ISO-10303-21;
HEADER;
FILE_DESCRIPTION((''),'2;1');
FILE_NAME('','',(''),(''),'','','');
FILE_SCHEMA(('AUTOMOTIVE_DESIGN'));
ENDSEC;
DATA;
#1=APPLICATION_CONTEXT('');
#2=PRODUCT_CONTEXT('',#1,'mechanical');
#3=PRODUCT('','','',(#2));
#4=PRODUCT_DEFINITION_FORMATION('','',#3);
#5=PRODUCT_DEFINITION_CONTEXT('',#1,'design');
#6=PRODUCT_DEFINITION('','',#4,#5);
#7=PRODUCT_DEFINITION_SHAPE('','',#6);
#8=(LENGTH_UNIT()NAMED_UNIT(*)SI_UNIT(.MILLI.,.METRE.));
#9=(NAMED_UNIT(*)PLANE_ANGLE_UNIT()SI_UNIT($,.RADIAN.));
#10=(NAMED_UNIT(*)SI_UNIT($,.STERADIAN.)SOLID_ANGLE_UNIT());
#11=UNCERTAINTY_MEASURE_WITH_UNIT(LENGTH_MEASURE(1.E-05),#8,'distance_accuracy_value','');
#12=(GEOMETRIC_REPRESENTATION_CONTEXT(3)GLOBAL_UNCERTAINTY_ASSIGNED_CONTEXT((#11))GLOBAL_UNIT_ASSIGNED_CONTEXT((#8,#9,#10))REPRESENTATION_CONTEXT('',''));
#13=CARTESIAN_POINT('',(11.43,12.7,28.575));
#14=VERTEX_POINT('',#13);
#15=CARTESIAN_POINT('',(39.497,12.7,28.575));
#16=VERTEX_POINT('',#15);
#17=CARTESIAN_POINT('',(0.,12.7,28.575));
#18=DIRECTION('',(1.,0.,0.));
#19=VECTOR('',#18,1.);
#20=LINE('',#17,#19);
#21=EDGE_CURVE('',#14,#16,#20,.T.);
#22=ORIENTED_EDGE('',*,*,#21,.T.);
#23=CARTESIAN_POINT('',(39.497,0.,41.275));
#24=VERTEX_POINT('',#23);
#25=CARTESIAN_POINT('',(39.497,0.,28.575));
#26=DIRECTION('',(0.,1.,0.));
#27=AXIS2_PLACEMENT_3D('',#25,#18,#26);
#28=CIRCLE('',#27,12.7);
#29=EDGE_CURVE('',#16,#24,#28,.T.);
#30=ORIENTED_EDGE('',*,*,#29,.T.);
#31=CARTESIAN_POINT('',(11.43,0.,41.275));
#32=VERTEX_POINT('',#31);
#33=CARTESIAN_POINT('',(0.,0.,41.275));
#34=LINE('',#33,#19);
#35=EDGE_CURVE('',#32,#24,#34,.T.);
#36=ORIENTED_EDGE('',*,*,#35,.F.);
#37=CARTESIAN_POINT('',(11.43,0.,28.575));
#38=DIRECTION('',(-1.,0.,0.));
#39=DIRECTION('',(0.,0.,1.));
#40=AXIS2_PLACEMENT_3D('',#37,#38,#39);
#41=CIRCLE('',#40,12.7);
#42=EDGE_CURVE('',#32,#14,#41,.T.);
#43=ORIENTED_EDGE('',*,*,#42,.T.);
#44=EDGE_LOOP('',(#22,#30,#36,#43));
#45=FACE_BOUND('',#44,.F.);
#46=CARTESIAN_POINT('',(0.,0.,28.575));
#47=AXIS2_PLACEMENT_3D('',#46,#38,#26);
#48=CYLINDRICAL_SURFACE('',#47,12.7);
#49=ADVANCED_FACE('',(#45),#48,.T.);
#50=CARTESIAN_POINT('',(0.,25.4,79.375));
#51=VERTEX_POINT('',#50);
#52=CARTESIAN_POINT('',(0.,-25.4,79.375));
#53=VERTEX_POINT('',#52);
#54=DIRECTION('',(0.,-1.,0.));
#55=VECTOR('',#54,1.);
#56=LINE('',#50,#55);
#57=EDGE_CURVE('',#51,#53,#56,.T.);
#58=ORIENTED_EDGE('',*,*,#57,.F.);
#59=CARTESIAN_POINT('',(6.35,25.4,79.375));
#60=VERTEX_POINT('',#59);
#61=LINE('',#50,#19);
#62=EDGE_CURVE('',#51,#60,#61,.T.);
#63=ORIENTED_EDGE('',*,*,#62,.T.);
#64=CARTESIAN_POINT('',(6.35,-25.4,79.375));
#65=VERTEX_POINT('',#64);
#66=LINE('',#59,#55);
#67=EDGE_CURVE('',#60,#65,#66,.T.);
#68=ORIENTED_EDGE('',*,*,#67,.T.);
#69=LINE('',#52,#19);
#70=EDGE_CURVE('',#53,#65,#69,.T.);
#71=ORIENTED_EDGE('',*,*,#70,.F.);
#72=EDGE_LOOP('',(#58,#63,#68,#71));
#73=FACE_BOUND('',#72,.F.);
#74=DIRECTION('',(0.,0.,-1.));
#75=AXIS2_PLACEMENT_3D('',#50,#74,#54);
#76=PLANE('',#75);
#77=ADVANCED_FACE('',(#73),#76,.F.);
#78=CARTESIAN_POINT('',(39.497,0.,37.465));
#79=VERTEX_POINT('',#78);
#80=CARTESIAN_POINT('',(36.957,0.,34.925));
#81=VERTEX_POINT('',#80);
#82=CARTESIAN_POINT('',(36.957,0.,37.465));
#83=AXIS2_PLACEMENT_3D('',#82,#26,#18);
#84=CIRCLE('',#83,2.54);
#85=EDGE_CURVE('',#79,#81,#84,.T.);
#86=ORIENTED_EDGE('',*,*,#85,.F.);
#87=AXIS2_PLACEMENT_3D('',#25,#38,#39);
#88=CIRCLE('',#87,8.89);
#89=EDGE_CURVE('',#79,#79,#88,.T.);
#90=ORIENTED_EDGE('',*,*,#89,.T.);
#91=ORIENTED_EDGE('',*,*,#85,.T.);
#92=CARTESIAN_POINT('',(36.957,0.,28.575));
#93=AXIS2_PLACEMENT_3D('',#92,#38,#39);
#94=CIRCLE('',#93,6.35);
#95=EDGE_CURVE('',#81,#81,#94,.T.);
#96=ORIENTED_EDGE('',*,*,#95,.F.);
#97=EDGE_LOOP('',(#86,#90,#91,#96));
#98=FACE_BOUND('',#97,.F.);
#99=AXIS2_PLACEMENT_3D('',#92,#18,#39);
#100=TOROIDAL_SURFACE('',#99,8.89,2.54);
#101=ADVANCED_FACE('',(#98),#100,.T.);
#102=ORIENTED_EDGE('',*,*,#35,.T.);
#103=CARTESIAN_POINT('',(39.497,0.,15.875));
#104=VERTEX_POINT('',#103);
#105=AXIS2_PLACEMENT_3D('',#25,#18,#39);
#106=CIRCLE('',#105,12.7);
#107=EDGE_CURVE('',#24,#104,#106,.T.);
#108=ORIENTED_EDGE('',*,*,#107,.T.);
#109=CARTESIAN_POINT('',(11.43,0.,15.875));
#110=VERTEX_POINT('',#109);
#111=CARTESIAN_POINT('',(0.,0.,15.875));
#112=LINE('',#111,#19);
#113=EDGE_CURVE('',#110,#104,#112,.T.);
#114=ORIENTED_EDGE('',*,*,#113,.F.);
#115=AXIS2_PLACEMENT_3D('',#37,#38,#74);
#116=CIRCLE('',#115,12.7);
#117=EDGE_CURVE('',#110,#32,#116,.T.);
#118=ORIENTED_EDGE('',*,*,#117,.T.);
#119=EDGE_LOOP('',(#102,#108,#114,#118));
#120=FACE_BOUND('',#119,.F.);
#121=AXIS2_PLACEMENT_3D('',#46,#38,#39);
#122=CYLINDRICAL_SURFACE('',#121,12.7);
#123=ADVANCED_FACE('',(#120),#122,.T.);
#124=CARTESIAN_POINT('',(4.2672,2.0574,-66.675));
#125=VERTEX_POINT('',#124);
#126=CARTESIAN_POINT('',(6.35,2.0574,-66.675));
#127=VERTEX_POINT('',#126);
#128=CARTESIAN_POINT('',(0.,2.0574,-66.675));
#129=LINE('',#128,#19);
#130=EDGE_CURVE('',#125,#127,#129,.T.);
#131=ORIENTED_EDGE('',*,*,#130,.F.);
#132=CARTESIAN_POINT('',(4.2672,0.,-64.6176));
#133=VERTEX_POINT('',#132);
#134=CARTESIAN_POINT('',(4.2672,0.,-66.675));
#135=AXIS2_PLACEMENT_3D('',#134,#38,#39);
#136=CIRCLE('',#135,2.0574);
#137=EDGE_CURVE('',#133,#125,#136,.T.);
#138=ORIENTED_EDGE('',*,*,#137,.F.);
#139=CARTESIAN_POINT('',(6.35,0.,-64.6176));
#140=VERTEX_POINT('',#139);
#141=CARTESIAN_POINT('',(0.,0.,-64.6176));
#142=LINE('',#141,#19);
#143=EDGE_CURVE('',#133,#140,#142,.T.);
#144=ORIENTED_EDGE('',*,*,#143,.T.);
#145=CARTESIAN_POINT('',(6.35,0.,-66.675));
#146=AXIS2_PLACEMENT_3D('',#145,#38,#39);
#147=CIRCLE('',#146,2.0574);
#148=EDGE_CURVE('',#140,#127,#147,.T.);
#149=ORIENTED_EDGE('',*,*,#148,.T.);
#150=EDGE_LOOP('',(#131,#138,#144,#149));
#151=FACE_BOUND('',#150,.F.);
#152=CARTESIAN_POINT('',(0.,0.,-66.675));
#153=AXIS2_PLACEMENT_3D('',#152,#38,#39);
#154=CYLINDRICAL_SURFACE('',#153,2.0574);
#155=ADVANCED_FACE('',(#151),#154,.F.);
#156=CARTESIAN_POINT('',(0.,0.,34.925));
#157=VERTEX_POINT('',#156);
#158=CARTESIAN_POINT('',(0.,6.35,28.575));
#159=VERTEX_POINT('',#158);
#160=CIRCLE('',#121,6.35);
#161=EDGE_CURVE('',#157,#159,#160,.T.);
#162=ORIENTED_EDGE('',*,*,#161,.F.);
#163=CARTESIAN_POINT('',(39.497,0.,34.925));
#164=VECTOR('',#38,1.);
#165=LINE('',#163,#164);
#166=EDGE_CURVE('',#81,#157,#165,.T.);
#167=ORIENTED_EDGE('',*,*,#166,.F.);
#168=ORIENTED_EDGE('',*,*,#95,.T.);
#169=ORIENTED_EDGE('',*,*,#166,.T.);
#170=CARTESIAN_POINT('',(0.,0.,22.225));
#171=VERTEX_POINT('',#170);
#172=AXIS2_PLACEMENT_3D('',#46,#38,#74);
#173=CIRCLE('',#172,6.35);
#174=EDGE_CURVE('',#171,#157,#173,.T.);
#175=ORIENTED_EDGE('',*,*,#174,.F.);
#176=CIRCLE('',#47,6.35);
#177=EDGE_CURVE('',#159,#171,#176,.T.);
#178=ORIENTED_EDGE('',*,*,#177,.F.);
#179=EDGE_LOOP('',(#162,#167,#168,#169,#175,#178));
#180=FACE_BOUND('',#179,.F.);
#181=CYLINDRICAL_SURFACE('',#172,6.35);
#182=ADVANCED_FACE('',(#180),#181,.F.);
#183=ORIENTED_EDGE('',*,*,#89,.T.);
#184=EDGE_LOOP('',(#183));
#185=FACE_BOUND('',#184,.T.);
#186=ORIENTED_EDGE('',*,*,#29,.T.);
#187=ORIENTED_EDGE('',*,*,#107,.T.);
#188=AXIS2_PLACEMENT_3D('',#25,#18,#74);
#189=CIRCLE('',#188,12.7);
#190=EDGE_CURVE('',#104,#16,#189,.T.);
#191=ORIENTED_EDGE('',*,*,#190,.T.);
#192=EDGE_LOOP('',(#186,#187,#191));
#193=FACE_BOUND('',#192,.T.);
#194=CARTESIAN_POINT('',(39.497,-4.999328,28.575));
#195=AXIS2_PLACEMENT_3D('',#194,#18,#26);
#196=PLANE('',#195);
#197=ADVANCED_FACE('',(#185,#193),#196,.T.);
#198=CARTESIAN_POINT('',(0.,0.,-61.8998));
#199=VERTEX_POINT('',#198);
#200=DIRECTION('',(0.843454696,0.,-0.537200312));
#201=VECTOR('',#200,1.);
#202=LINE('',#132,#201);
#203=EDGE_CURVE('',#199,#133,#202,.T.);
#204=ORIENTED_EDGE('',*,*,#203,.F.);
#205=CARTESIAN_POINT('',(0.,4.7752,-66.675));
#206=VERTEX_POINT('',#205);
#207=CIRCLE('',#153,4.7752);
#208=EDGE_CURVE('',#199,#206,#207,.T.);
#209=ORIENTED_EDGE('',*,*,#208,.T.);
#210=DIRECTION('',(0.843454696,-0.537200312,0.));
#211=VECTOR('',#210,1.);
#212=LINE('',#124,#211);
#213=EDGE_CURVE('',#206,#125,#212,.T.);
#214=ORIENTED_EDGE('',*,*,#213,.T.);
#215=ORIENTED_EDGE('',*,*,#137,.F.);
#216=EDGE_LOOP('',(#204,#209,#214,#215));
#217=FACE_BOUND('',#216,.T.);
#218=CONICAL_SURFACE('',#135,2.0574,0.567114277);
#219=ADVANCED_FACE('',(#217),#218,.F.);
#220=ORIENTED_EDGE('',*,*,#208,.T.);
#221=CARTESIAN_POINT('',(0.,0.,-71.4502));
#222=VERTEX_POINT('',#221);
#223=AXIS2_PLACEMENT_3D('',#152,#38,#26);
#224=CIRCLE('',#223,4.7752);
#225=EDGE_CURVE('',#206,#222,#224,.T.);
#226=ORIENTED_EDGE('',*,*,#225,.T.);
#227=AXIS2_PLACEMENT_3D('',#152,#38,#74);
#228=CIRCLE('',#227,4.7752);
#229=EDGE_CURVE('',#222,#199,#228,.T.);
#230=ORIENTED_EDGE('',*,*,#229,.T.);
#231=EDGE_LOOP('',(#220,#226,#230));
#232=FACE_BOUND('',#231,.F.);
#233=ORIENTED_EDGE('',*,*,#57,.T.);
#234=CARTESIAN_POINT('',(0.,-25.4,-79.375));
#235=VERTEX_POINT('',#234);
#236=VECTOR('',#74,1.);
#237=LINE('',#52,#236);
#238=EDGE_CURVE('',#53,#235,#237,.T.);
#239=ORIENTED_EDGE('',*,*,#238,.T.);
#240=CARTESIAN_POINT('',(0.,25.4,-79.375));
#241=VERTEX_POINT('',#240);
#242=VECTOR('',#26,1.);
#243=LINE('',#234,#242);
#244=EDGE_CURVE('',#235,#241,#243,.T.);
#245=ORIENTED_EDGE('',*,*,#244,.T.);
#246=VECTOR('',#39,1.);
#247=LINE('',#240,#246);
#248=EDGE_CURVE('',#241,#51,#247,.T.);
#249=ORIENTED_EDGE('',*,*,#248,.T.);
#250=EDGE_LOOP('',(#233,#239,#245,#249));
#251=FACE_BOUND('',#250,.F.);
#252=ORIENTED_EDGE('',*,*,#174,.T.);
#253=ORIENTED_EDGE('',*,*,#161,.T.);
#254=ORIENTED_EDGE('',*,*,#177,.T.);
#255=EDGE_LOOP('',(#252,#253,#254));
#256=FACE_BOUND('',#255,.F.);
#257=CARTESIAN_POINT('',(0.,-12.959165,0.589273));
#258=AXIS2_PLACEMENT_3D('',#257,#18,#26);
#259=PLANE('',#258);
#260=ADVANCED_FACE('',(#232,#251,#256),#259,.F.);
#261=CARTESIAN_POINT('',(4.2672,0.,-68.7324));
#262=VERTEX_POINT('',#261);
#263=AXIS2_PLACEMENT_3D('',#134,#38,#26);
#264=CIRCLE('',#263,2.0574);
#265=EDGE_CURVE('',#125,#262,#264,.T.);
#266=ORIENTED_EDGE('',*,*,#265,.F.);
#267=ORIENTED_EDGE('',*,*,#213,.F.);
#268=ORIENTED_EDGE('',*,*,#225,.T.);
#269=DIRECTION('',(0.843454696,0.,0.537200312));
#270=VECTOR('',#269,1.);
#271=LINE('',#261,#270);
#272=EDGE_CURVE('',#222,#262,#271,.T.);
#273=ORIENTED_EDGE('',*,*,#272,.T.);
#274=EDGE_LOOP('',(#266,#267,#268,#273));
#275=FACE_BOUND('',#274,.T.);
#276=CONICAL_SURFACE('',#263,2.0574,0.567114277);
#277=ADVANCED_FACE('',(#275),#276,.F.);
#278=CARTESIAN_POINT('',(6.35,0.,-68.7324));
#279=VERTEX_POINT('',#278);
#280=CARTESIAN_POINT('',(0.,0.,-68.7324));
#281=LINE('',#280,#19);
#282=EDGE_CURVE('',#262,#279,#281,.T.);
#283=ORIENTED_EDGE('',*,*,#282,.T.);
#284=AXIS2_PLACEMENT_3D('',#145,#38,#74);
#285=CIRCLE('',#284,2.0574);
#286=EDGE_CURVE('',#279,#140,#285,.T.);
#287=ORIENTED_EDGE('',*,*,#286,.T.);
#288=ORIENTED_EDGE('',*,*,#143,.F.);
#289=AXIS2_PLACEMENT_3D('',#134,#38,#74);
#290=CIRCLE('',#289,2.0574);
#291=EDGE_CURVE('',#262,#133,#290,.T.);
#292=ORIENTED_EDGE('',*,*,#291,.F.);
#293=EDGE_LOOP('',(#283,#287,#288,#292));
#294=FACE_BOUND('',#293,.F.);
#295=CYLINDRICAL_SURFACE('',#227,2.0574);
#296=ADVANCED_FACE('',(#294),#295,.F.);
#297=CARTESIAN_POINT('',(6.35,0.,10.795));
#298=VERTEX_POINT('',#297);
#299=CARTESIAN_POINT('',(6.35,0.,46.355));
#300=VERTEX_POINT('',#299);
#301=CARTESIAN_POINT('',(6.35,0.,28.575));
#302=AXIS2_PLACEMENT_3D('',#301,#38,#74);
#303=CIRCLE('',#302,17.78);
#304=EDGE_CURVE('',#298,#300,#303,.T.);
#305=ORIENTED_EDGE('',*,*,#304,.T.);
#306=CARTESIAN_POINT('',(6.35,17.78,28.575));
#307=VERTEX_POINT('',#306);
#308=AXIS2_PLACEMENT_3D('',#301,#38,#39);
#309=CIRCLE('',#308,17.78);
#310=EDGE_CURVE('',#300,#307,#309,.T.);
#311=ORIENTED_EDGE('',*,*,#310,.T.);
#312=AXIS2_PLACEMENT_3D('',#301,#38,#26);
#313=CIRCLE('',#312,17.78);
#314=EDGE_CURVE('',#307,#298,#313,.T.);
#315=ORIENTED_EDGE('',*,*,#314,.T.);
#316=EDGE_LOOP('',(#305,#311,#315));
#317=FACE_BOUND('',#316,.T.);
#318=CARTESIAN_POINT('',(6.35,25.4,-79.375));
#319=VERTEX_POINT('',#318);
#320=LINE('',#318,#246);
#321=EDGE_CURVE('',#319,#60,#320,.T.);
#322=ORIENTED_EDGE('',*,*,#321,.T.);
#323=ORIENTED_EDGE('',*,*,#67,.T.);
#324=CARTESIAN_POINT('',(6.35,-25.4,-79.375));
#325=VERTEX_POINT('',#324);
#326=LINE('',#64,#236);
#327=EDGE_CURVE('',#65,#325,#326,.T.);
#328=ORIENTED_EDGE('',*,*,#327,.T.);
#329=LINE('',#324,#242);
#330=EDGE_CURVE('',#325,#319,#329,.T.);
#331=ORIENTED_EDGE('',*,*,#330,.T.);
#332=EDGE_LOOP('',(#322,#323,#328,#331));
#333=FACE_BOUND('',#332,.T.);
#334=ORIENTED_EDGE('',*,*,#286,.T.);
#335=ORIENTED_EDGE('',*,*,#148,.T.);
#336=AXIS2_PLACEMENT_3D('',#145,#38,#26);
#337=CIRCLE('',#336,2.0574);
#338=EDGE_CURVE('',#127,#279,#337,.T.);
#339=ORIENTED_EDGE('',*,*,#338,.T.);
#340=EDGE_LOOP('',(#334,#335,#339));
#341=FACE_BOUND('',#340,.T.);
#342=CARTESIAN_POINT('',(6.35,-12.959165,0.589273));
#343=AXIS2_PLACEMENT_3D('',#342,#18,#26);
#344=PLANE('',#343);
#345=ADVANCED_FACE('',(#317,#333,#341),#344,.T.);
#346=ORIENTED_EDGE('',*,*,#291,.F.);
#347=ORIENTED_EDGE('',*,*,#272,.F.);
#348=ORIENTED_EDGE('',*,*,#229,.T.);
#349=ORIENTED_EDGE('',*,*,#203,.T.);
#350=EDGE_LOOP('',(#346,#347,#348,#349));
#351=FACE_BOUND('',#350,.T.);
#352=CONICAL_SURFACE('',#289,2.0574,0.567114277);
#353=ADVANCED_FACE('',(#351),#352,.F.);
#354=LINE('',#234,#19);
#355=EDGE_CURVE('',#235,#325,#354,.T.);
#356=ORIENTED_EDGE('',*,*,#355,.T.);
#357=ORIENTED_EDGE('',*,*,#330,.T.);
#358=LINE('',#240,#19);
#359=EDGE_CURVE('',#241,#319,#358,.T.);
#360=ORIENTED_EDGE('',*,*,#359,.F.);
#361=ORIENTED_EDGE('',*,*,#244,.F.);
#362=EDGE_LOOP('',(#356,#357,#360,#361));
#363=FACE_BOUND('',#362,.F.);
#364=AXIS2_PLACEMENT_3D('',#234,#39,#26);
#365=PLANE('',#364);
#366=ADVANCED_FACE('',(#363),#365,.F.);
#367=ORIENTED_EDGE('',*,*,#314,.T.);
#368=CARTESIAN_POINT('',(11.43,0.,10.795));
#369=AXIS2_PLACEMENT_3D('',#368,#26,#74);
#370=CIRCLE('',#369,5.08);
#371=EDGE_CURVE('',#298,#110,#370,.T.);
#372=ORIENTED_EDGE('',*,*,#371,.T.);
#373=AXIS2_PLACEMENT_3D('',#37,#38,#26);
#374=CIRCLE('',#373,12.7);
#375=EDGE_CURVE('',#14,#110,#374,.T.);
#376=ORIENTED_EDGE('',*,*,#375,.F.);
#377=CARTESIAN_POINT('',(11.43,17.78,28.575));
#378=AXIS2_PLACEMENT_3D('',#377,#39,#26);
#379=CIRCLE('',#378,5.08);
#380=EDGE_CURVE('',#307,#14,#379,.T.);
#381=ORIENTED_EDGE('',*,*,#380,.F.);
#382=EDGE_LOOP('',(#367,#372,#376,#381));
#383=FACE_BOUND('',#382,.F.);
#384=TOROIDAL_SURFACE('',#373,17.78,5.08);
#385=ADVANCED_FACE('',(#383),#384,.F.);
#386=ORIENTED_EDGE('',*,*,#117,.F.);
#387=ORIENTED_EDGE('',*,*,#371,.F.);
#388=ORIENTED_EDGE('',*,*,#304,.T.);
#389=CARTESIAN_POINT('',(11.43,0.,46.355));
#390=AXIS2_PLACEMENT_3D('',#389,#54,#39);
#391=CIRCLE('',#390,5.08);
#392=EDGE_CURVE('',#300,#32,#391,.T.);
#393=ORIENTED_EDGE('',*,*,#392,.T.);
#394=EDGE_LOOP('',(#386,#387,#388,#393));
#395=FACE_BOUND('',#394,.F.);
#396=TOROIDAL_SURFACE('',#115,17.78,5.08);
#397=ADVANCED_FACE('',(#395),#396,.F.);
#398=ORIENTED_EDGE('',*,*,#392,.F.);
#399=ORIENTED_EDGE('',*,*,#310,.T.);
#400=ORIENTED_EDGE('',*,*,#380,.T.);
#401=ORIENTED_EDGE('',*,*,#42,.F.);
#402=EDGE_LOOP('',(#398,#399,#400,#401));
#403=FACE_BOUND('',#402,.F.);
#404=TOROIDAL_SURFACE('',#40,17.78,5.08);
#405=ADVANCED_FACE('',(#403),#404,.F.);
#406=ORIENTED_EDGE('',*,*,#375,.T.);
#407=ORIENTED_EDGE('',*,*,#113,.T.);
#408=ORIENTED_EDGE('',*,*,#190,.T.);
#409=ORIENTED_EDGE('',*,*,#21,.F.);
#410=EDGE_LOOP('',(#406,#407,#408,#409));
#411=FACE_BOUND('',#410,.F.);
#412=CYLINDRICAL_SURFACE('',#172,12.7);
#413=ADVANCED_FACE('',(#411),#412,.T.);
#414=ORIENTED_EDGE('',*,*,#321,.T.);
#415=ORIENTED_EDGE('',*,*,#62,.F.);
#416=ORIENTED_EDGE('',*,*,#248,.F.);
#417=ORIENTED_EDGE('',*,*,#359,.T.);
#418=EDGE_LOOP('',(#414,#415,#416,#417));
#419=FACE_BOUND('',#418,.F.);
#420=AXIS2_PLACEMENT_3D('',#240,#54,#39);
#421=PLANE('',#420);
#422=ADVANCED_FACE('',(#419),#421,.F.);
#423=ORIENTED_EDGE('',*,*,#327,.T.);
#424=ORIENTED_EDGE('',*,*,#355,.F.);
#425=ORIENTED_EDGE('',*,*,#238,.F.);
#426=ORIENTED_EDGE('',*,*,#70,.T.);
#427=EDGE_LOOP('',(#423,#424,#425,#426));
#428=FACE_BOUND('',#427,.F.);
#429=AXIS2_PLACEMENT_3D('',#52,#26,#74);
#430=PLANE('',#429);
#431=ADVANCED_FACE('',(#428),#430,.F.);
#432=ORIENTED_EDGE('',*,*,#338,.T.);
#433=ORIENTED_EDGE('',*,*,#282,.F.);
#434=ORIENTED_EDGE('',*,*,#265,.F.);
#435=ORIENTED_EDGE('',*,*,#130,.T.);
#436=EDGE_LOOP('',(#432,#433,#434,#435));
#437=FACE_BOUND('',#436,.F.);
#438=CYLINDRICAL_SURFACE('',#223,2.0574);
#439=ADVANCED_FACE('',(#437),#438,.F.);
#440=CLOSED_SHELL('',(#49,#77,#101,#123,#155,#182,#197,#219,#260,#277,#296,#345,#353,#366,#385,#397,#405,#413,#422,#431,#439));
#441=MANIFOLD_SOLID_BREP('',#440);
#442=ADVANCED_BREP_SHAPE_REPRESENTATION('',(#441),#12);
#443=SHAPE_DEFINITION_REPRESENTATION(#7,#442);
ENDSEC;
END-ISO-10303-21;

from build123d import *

# Parameters (mm, degrees)
F1_DEPTH = 6.35
F2_DEPTH = 39.497
F3_SIZE2 = 4.2672
F3_SIZE  = 2.7178
F4_R     = 5.08


# Not quite as in the source:
# - a fillet or chamfer that OpenCascade refuses, or shapes differently, is made with other operations: its cross-section is extruded or revolved along the edge and cut away or added


with BuildPart() as f1:
    # F0 (on Right) → F1 (new body)
    with BuildSketch(Plane.YZ):
        with BuildLine():
            Line((0, 79.375), (-25.4, 79.375))
            Line((-25.4, 79.375), (-25.4, -79.375))
            Line((-25.4, -79.375), (0, -79.375))
            Line((0, -79.375), (0, -68.7324))
            ThreePointArc((0, -68.7324), (-2.0574, -66.675), (0, -64.6176))
            Line((0, -64.6176), (0, -53.975))
            Line((0, -53.975), (0, -41.275))
            Line((0, -41.275), (0, 15.875))
            ThreePointArc((0, 15.875), (-12.7, 28.575), (0, 41.275))
            Line((0, 41.275), (0, 79.375))
        make_face()
        with BuildLine():
            Line((25.4, 79.375), (0, 79.375))
            Line((0, 79.375), (0, 41.275))
            ThreePointArc((0, 41.275), (8.9802561211, 37.5552561211), (12.7, 28.575))
            ThreePointArc((12.7, 28.575), (8.9802561211, 19.5947438789), (0, 15.875))
            Line((0, 15.875), (0, -41.275))
            Line((0, -41.275), (0, -53.975))
            Line((0, -53.975), (0, -64.6176))
            ThreePointArc((0, -64.6176), (1.4548014916, -65.2201985084), (2.0574, -66.675))
            ThreePointArc((2.0574, -66.675), (1.4548014916, -68.1298014916), (0, -68.7324))
            Line((0, -68.7324), (0, -79.375))
            Line((0, -79.375), (25.4, -79.375))
            Line((25.4, -79.375), (25.4, 79.375))
        make_face()
        with BuildLine():
            Line((0, 34.925), (0, 41.275))
            ThreePointArc((0, 41.275), (-12.7, 28.575), (0, 15.875))
            Line((0, 15.875), (0, 22.225))
            ThreePointArc((0, 22.225), (-6.35, 28.575), (0, 34.925))
        make_face()
        with BuildLine():
            ThreePointArc((12.7, 28.575), (8.9802561211, 37.5552561211), (0, 41.275))
            Line((0, 41.275), (0, 34.925))
            ThreePointArc((0, 34.925), (4.4901280605, 33.0651280605), (6.35, 28.575))
            ThreePointArc((6.35, 28.575), (4.4901280605, 24.0848719395), (0, 22.225))
            Line((0, 22.225), (0, 15.875))
            ThreePointArc((0, 15.875), (8.9802561211, 19.5947438789), (12.7, 28.575))
        make_face()
    extrude(amount=F1_DEPTH)

    # F0 (on Right) → F2 (join)
    with BuildSketch(Plane.YZ):
        with BuildLine():
            Line((0, 34.925), (0, 41.275))
            ThreePointArc((0, 41.275), (-12.7, 28.575), (0, 15.875))
            Line((0, 15.875), (0, 22.225))
            ThreePointArc((0, 22.225), (-6.35, 28.575), (0, 34.925))
        make_face()
        with BuildLine():
            ThreePointArc((12.7, 28.575), (8.9802561211, 37.5552561211), (0, 41.275))
            Line((0, 41.275), (0, 34.925))
            ThreePointArc((0, 34.925), (4.4901280605, 33.0651280605), (6.35, 28.575))
            ThreePointArc((6.35, 28.575), (4.4901280605, 24.0848719395), (0, 22.225))
            Line((0, 22.225), (0, 15.875))
            ThreePointArc((0, 15.875), (8.9802561211, 19.5947438789), (12.7, 28.575))
        make_face()
    extrude(amount=F2_DEPTH)

    # F3
    f3_edges = [f1.edges().sort_by_distance(p)[0] for p in [
        (0, 0, -68.7324),
    ]]
    f3_side = f1.faces().sort_by_distance((0, 0, -0.344897))[0]
    chamfer(f3_edges, length=F3_SIZE, length2=F3_SIZE2, reference=f3_side)

    # F4
    f4_edges = [f1.edges().sort_by_distance(p)[0] for p in [
        (6.35, 0, 41.275),
    ]]
    fillet(f4_edges, radius=F4_R)

    # F5: fillet of radius 2.54 on 1 edges, made by hand

    # F5_s1 → F5_t2 (revolve, cut)
    with BuildSketch(Plane.XZ):
        with BuildLine():
            ThreePointArc((39.497, 37.465), (38.7530512242, 35.6689487758), (36.957, 34.925))
            Line((36.957, 34.925), (39.497, 34.925))
            Line((39.497, 34.925), (39.497, 37.465))
        make_face()
    revolve(axis=Axis((39.497, 0, 28.575), (-1, 0, 0)), mode=Mode.SUBTRACT)


solid = f1.part
